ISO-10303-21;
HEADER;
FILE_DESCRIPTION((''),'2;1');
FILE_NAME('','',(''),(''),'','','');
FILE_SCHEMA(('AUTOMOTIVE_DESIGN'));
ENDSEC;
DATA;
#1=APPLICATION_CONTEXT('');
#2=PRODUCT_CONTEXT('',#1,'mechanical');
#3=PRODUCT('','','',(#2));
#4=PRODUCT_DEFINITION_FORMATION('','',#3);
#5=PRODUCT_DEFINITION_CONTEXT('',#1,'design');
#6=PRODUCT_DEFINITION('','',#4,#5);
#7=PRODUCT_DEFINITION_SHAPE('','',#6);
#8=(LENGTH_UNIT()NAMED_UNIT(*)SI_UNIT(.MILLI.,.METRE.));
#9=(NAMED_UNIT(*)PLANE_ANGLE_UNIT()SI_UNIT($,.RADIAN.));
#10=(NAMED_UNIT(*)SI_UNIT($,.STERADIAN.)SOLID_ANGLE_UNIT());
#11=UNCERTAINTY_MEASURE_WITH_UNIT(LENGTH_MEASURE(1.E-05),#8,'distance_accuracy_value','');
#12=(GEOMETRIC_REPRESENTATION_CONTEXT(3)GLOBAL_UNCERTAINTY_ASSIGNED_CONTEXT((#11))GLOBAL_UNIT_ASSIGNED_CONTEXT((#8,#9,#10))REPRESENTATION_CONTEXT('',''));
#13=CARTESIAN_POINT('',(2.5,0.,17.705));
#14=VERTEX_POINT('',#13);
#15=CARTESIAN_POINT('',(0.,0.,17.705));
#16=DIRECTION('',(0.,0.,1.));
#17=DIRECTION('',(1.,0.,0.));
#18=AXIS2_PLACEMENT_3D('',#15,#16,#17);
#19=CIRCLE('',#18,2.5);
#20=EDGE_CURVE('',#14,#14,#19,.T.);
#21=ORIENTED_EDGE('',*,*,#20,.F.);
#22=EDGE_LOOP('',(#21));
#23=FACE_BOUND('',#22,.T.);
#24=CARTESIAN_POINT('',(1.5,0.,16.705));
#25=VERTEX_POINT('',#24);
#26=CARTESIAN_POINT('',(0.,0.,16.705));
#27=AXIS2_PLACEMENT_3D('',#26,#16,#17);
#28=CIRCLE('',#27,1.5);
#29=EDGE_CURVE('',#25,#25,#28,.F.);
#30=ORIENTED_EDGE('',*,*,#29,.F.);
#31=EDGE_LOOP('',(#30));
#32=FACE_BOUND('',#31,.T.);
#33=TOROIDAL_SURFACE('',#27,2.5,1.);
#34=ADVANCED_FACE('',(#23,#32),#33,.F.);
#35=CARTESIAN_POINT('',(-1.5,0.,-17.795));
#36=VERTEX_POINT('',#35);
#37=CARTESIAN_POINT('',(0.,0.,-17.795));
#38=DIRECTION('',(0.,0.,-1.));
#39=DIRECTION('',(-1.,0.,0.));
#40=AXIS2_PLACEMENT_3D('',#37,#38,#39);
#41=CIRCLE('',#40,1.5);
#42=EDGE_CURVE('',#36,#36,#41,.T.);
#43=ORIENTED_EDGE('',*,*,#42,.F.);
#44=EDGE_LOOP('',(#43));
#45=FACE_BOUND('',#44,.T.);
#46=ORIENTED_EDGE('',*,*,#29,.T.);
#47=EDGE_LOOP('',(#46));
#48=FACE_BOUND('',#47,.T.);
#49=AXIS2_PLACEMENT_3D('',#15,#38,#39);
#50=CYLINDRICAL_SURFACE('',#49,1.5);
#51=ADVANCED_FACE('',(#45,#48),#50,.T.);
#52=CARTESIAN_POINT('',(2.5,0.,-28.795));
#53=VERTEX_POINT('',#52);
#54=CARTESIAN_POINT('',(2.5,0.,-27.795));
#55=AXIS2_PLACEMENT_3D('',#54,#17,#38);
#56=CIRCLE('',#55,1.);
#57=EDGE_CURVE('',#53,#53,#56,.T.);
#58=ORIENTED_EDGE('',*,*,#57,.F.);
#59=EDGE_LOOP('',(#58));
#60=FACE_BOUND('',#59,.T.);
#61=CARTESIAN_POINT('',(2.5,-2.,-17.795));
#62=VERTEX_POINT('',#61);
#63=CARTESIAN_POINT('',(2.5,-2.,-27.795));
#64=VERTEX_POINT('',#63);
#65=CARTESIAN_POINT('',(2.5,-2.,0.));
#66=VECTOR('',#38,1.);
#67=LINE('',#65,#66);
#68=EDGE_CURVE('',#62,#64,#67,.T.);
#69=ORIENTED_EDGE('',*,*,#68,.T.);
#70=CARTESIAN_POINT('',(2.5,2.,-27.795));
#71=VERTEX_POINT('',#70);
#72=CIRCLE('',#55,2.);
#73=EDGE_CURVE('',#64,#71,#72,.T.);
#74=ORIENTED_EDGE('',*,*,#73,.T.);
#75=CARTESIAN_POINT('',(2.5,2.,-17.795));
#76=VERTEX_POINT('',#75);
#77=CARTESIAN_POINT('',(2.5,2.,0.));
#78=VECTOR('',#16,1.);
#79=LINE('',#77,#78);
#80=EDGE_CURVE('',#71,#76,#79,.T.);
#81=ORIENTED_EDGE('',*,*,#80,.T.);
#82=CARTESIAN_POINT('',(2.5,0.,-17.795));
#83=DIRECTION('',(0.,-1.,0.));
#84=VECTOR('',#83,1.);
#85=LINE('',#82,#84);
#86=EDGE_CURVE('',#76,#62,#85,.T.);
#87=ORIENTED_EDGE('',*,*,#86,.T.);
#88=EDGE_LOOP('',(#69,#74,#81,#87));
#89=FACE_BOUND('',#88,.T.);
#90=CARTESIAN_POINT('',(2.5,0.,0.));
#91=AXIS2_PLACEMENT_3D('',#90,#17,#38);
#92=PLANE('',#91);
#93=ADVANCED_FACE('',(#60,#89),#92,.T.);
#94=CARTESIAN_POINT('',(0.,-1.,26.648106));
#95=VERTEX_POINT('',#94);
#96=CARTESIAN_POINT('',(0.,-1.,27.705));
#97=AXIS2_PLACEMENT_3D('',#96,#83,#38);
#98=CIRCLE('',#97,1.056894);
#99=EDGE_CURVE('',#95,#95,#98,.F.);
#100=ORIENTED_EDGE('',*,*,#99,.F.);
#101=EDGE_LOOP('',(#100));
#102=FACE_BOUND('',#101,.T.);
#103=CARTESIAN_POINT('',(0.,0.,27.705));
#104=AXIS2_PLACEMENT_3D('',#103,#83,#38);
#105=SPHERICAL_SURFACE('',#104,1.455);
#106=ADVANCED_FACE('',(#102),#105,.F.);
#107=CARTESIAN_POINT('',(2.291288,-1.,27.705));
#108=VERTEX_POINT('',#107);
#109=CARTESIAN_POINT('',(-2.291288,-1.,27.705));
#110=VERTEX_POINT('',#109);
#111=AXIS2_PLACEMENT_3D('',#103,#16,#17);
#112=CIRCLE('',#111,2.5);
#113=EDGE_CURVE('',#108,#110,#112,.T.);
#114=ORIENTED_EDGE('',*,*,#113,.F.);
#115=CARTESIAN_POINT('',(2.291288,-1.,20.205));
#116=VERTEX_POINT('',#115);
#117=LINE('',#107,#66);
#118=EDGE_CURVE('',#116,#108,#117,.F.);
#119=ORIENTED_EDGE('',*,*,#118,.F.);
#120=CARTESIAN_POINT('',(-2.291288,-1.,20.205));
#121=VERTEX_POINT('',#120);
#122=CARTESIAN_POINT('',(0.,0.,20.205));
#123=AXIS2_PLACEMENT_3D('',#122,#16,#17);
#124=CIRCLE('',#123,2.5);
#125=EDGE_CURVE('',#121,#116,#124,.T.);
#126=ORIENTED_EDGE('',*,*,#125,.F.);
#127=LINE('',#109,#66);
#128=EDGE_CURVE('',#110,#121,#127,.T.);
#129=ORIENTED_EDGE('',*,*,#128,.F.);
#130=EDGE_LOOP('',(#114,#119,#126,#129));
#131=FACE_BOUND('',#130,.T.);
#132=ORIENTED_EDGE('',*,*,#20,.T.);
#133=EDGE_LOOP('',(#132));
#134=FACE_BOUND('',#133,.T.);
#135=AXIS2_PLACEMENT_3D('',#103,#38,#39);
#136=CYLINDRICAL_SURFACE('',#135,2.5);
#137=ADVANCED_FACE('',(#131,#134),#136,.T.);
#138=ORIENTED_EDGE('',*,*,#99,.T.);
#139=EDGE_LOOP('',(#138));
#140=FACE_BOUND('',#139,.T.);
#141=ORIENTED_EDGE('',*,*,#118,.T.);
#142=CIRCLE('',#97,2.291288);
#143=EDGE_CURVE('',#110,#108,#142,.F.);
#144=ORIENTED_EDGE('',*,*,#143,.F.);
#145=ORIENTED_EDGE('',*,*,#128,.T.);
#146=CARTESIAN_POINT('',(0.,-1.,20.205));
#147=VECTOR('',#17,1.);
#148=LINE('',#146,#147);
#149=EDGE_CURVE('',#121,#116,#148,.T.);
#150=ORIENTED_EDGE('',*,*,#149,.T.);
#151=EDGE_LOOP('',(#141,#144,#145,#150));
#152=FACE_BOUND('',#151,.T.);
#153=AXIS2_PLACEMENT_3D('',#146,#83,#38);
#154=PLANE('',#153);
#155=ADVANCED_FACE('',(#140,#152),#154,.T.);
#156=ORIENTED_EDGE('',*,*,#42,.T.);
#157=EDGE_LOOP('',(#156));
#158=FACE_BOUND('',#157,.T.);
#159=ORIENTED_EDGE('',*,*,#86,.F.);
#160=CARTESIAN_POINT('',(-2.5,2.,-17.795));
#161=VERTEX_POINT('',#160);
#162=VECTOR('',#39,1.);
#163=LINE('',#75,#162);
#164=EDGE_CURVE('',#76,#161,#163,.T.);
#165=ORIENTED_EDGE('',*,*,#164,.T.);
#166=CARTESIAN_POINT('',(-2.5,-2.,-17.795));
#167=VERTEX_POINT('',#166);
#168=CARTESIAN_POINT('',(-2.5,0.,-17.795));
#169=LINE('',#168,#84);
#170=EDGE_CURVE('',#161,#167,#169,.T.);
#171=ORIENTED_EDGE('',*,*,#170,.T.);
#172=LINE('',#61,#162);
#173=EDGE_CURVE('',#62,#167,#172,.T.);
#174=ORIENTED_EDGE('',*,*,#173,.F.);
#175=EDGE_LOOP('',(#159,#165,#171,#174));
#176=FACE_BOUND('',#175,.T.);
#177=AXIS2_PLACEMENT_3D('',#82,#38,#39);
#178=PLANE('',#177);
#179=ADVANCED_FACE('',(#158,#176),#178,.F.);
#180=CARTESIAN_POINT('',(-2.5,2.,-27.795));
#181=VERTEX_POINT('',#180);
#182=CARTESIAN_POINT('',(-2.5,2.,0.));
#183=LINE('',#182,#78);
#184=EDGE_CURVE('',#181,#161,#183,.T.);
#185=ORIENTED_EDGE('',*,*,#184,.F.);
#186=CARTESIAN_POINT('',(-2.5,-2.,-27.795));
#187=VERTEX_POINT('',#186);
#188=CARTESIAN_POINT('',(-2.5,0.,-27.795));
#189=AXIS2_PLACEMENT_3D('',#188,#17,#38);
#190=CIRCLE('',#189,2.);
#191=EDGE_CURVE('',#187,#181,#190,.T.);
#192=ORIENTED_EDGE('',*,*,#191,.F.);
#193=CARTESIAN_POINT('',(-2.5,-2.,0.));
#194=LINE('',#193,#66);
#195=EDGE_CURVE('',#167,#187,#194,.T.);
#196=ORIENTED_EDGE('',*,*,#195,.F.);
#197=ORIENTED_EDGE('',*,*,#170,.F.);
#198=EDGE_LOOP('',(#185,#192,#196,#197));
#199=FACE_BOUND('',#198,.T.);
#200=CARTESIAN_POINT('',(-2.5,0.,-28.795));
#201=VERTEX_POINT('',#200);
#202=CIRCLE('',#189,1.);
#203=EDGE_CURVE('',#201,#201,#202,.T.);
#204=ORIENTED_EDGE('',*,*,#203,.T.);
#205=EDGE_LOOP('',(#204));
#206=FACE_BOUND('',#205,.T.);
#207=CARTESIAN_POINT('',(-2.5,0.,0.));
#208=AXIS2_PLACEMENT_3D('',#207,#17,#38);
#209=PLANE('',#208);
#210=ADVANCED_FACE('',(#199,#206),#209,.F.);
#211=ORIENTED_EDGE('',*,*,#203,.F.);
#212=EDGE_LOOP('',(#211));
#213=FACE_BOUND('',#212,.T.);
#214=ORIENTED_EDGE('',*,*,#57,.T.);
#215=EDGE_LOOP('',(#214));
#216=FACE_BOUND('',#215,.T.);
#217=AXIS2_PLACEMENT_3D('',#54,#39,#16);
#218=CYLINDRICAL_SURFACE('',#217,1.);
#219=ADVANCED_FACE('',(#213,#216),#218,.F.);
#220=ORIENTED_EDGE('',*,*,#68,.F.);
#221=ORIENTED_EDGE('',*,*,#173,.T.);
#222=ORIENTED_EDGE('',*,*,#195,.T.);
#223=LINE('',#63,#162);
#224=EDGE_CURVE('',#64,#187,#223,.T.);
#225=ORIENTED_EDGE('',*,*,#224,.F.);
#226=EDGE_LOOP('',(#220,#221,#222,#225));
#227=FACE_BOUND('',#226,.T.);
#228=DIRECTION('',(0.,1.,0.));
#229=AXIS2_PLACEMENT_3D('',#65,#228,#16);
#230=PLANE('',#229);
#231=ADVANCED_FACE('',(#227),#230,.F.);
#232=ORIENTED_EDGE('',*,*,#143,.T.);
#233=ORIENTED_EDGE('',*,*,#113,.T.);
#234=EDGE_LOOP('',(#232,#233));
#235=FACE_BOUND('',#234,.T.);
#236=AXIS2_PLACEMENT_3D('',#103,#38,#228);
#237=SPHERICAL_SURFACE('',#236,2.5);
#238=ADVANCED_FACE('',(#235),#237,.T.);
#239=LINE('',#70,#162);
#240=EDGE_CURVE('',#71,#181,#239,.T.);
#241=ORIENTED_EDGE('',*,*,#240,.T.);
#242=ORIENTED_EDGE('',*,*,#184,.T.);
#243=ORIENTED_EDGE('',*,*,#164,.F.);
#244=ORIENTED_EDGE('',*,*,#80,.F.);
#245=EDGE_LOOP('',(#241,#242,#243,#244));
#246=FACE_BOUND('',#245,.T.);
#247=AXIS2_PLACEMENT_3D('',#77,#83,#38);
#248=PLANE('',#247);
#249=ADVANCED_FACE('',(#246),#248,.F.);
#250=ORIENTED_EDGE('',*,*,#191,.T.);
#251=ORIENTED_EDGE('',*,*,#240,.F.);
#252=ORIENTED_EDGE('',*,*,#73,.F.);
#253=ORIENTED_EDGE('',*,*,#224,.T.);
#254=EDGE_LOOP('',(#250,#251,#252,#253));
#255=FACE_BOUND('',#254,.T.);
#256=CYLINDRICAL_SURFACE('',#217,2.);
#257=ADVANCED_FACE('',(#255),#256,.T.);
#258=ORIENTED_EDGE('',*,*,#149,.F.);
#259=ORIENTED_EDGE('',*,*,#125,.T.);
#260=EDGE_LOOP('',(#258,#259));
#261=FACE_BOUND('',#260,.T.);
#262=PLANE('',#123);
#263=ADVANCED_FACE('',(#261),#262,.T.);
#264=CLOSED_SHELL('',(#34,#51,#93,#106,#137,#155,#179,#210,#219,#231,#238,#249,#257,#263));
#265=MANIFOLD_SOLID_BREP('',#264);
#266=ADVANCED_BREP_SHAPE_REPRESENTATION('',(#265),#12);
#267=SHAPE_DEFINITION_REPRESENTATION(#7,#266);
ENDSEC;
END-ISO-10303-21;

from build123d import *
from build123d.topology import SkipClean

# Parameters (mm, degrees)
SKETCH_1_R          = 1.5
EXTRUDE_1_DEPTH     = 17.705
SKETCH_2_R          = 2.5
EXTRUDE_2_DEPTH     = 10
FILLET_1_R          = 1
CUT_EXTRUDE_1_DEPTH = 10
EXTRUDE_START       = 17.795
SKETCH_6_R          = 1.5
EXTRUDE_3_DEPTH     = 17.795
SKETCH_7_R          = 1
EXTRUDE_4_DEPTH     = 2.5


with BuildPart() as part:
    # 草图1 → 凸台-拉伸1 (new body)
    with BuildSketch(Plane.XY):
        Circle(SKETCH_1_R)
    extrude(amount=EXTRUDE_1_DEPTH)

    # 草图2 → 凸台-拉伸2 (add)
    with BuildSketch(Plane.XY.offset(17.705)):
        Circle(SKETCH_2_R)
    extrude(amount=EXTRUDE_2_DEPTH)

    # 圆角1
    fillet_1_edges = [part.edges().sort_by_distance(p)[0] for p in [
        (-1.5, 0, 17.705),
    ]]
    fillet(fillet_1_edges, radius=FILLET_1_R - 0.0001)  # a hair under: the kernel refuses the full size

    # 草图3 → 旋转1 (revolve)
    with SkipClean():  # the faces are left unmerged after this step: merging them gives an invalid solid
        with BuildSketch(Plane(origin=(0, 0, 0), x_dir=(0, 0, -1), z_dir=(1, 0, 0))):
            with BuildLine():
                ThreePointArc((-30.205, 0), (-27.705, -2.5), (-25.205, 0))
                Line((-25.205, 0), (-27.705, 0))
                Line((-27.705, 0), (-30.205, 0))
            make_face()
            with BuildLine():
                Line((-27.705, 0), (-25.205, 0))
                ThreePointArc((-25.205, 0), (-27.705, 2.5), (-30.205, 0))
                Line((-30.205, 0), (-27.705, 0))
            make_face()
        revolve(axis=Axis((0, 0, 0), (0, 0, 1)))
    add(part.part.scale(1), mode=Mode.REPLACE)  # the faces are merged on a copy

    # 草图4 → 切除-拉伸1 (cut)
    with BuildSketch(Plane.XY.offset(30.205)):
        Polygon((-2.5, -1), (0, -1), (2.5, -1), (2.5, -3), (-2.5, -3), align=None)
    extrude(amount=-CUT_EXTRUDE_1_DEPTH, mode=Mode.SUBTRACT)

    # 草图5 → 切除-旋转11 (revolve, cut)
    with BuildSketch(Plane(origin=(0, 0, 0), x_dir=(0, 0, -1), z_dir=(1, 0, 0))):
        with BuildLine():
            Line((-26.25, 0), (-29.16, 0))
            ThreePointArc((-29.16, 0), (-27.705, -1.455), (-26.25, 0))
        make_face()
    revolve(axis=Axis((0, 0, 0), (0, 0, 1)), mode=Mode.SUBTRACT)

    # 草图6 → 凸台-拉伸3 (add)
    with SkipClean():  # the faces are left unmerged after this step: merging them gives an invalid solid
        with BuildSketch(Plane(origin=(0, 0, 0), x_dir=(-1, 0, 0), z_dir=(0, 0, -1)).offset(EXTRUDE_START)):
            Circle(SKETCH_6_R)
        extrude(amount=-EXTRUDE_3_DEPTH)

    # 草图7 → 凸台-拉伸4 (add, symmetric)
    with BuildSketch(Plane(origin=(0, 0, 0), x_dir=(0, 0, -1), z_dir=(1, 0, 0))):
        with BuildLine():
            Line((17.795, -2), (27.795, -2))
            ThreePointArc((27.795, -2), (29.795, 0), (27.795, 2))
            Line((27.795, 2), (17.795, 2))
            Line((17.795, 2), (17.795, -2))
        make_face()
        with Locations((27.795, 0)):
            Circle(SKETCH_7_R, mode=Mode.SUBTRACT)
    extrude(amount=EXTRUDE_4_DEPTH, both=True)


solid = part.part
